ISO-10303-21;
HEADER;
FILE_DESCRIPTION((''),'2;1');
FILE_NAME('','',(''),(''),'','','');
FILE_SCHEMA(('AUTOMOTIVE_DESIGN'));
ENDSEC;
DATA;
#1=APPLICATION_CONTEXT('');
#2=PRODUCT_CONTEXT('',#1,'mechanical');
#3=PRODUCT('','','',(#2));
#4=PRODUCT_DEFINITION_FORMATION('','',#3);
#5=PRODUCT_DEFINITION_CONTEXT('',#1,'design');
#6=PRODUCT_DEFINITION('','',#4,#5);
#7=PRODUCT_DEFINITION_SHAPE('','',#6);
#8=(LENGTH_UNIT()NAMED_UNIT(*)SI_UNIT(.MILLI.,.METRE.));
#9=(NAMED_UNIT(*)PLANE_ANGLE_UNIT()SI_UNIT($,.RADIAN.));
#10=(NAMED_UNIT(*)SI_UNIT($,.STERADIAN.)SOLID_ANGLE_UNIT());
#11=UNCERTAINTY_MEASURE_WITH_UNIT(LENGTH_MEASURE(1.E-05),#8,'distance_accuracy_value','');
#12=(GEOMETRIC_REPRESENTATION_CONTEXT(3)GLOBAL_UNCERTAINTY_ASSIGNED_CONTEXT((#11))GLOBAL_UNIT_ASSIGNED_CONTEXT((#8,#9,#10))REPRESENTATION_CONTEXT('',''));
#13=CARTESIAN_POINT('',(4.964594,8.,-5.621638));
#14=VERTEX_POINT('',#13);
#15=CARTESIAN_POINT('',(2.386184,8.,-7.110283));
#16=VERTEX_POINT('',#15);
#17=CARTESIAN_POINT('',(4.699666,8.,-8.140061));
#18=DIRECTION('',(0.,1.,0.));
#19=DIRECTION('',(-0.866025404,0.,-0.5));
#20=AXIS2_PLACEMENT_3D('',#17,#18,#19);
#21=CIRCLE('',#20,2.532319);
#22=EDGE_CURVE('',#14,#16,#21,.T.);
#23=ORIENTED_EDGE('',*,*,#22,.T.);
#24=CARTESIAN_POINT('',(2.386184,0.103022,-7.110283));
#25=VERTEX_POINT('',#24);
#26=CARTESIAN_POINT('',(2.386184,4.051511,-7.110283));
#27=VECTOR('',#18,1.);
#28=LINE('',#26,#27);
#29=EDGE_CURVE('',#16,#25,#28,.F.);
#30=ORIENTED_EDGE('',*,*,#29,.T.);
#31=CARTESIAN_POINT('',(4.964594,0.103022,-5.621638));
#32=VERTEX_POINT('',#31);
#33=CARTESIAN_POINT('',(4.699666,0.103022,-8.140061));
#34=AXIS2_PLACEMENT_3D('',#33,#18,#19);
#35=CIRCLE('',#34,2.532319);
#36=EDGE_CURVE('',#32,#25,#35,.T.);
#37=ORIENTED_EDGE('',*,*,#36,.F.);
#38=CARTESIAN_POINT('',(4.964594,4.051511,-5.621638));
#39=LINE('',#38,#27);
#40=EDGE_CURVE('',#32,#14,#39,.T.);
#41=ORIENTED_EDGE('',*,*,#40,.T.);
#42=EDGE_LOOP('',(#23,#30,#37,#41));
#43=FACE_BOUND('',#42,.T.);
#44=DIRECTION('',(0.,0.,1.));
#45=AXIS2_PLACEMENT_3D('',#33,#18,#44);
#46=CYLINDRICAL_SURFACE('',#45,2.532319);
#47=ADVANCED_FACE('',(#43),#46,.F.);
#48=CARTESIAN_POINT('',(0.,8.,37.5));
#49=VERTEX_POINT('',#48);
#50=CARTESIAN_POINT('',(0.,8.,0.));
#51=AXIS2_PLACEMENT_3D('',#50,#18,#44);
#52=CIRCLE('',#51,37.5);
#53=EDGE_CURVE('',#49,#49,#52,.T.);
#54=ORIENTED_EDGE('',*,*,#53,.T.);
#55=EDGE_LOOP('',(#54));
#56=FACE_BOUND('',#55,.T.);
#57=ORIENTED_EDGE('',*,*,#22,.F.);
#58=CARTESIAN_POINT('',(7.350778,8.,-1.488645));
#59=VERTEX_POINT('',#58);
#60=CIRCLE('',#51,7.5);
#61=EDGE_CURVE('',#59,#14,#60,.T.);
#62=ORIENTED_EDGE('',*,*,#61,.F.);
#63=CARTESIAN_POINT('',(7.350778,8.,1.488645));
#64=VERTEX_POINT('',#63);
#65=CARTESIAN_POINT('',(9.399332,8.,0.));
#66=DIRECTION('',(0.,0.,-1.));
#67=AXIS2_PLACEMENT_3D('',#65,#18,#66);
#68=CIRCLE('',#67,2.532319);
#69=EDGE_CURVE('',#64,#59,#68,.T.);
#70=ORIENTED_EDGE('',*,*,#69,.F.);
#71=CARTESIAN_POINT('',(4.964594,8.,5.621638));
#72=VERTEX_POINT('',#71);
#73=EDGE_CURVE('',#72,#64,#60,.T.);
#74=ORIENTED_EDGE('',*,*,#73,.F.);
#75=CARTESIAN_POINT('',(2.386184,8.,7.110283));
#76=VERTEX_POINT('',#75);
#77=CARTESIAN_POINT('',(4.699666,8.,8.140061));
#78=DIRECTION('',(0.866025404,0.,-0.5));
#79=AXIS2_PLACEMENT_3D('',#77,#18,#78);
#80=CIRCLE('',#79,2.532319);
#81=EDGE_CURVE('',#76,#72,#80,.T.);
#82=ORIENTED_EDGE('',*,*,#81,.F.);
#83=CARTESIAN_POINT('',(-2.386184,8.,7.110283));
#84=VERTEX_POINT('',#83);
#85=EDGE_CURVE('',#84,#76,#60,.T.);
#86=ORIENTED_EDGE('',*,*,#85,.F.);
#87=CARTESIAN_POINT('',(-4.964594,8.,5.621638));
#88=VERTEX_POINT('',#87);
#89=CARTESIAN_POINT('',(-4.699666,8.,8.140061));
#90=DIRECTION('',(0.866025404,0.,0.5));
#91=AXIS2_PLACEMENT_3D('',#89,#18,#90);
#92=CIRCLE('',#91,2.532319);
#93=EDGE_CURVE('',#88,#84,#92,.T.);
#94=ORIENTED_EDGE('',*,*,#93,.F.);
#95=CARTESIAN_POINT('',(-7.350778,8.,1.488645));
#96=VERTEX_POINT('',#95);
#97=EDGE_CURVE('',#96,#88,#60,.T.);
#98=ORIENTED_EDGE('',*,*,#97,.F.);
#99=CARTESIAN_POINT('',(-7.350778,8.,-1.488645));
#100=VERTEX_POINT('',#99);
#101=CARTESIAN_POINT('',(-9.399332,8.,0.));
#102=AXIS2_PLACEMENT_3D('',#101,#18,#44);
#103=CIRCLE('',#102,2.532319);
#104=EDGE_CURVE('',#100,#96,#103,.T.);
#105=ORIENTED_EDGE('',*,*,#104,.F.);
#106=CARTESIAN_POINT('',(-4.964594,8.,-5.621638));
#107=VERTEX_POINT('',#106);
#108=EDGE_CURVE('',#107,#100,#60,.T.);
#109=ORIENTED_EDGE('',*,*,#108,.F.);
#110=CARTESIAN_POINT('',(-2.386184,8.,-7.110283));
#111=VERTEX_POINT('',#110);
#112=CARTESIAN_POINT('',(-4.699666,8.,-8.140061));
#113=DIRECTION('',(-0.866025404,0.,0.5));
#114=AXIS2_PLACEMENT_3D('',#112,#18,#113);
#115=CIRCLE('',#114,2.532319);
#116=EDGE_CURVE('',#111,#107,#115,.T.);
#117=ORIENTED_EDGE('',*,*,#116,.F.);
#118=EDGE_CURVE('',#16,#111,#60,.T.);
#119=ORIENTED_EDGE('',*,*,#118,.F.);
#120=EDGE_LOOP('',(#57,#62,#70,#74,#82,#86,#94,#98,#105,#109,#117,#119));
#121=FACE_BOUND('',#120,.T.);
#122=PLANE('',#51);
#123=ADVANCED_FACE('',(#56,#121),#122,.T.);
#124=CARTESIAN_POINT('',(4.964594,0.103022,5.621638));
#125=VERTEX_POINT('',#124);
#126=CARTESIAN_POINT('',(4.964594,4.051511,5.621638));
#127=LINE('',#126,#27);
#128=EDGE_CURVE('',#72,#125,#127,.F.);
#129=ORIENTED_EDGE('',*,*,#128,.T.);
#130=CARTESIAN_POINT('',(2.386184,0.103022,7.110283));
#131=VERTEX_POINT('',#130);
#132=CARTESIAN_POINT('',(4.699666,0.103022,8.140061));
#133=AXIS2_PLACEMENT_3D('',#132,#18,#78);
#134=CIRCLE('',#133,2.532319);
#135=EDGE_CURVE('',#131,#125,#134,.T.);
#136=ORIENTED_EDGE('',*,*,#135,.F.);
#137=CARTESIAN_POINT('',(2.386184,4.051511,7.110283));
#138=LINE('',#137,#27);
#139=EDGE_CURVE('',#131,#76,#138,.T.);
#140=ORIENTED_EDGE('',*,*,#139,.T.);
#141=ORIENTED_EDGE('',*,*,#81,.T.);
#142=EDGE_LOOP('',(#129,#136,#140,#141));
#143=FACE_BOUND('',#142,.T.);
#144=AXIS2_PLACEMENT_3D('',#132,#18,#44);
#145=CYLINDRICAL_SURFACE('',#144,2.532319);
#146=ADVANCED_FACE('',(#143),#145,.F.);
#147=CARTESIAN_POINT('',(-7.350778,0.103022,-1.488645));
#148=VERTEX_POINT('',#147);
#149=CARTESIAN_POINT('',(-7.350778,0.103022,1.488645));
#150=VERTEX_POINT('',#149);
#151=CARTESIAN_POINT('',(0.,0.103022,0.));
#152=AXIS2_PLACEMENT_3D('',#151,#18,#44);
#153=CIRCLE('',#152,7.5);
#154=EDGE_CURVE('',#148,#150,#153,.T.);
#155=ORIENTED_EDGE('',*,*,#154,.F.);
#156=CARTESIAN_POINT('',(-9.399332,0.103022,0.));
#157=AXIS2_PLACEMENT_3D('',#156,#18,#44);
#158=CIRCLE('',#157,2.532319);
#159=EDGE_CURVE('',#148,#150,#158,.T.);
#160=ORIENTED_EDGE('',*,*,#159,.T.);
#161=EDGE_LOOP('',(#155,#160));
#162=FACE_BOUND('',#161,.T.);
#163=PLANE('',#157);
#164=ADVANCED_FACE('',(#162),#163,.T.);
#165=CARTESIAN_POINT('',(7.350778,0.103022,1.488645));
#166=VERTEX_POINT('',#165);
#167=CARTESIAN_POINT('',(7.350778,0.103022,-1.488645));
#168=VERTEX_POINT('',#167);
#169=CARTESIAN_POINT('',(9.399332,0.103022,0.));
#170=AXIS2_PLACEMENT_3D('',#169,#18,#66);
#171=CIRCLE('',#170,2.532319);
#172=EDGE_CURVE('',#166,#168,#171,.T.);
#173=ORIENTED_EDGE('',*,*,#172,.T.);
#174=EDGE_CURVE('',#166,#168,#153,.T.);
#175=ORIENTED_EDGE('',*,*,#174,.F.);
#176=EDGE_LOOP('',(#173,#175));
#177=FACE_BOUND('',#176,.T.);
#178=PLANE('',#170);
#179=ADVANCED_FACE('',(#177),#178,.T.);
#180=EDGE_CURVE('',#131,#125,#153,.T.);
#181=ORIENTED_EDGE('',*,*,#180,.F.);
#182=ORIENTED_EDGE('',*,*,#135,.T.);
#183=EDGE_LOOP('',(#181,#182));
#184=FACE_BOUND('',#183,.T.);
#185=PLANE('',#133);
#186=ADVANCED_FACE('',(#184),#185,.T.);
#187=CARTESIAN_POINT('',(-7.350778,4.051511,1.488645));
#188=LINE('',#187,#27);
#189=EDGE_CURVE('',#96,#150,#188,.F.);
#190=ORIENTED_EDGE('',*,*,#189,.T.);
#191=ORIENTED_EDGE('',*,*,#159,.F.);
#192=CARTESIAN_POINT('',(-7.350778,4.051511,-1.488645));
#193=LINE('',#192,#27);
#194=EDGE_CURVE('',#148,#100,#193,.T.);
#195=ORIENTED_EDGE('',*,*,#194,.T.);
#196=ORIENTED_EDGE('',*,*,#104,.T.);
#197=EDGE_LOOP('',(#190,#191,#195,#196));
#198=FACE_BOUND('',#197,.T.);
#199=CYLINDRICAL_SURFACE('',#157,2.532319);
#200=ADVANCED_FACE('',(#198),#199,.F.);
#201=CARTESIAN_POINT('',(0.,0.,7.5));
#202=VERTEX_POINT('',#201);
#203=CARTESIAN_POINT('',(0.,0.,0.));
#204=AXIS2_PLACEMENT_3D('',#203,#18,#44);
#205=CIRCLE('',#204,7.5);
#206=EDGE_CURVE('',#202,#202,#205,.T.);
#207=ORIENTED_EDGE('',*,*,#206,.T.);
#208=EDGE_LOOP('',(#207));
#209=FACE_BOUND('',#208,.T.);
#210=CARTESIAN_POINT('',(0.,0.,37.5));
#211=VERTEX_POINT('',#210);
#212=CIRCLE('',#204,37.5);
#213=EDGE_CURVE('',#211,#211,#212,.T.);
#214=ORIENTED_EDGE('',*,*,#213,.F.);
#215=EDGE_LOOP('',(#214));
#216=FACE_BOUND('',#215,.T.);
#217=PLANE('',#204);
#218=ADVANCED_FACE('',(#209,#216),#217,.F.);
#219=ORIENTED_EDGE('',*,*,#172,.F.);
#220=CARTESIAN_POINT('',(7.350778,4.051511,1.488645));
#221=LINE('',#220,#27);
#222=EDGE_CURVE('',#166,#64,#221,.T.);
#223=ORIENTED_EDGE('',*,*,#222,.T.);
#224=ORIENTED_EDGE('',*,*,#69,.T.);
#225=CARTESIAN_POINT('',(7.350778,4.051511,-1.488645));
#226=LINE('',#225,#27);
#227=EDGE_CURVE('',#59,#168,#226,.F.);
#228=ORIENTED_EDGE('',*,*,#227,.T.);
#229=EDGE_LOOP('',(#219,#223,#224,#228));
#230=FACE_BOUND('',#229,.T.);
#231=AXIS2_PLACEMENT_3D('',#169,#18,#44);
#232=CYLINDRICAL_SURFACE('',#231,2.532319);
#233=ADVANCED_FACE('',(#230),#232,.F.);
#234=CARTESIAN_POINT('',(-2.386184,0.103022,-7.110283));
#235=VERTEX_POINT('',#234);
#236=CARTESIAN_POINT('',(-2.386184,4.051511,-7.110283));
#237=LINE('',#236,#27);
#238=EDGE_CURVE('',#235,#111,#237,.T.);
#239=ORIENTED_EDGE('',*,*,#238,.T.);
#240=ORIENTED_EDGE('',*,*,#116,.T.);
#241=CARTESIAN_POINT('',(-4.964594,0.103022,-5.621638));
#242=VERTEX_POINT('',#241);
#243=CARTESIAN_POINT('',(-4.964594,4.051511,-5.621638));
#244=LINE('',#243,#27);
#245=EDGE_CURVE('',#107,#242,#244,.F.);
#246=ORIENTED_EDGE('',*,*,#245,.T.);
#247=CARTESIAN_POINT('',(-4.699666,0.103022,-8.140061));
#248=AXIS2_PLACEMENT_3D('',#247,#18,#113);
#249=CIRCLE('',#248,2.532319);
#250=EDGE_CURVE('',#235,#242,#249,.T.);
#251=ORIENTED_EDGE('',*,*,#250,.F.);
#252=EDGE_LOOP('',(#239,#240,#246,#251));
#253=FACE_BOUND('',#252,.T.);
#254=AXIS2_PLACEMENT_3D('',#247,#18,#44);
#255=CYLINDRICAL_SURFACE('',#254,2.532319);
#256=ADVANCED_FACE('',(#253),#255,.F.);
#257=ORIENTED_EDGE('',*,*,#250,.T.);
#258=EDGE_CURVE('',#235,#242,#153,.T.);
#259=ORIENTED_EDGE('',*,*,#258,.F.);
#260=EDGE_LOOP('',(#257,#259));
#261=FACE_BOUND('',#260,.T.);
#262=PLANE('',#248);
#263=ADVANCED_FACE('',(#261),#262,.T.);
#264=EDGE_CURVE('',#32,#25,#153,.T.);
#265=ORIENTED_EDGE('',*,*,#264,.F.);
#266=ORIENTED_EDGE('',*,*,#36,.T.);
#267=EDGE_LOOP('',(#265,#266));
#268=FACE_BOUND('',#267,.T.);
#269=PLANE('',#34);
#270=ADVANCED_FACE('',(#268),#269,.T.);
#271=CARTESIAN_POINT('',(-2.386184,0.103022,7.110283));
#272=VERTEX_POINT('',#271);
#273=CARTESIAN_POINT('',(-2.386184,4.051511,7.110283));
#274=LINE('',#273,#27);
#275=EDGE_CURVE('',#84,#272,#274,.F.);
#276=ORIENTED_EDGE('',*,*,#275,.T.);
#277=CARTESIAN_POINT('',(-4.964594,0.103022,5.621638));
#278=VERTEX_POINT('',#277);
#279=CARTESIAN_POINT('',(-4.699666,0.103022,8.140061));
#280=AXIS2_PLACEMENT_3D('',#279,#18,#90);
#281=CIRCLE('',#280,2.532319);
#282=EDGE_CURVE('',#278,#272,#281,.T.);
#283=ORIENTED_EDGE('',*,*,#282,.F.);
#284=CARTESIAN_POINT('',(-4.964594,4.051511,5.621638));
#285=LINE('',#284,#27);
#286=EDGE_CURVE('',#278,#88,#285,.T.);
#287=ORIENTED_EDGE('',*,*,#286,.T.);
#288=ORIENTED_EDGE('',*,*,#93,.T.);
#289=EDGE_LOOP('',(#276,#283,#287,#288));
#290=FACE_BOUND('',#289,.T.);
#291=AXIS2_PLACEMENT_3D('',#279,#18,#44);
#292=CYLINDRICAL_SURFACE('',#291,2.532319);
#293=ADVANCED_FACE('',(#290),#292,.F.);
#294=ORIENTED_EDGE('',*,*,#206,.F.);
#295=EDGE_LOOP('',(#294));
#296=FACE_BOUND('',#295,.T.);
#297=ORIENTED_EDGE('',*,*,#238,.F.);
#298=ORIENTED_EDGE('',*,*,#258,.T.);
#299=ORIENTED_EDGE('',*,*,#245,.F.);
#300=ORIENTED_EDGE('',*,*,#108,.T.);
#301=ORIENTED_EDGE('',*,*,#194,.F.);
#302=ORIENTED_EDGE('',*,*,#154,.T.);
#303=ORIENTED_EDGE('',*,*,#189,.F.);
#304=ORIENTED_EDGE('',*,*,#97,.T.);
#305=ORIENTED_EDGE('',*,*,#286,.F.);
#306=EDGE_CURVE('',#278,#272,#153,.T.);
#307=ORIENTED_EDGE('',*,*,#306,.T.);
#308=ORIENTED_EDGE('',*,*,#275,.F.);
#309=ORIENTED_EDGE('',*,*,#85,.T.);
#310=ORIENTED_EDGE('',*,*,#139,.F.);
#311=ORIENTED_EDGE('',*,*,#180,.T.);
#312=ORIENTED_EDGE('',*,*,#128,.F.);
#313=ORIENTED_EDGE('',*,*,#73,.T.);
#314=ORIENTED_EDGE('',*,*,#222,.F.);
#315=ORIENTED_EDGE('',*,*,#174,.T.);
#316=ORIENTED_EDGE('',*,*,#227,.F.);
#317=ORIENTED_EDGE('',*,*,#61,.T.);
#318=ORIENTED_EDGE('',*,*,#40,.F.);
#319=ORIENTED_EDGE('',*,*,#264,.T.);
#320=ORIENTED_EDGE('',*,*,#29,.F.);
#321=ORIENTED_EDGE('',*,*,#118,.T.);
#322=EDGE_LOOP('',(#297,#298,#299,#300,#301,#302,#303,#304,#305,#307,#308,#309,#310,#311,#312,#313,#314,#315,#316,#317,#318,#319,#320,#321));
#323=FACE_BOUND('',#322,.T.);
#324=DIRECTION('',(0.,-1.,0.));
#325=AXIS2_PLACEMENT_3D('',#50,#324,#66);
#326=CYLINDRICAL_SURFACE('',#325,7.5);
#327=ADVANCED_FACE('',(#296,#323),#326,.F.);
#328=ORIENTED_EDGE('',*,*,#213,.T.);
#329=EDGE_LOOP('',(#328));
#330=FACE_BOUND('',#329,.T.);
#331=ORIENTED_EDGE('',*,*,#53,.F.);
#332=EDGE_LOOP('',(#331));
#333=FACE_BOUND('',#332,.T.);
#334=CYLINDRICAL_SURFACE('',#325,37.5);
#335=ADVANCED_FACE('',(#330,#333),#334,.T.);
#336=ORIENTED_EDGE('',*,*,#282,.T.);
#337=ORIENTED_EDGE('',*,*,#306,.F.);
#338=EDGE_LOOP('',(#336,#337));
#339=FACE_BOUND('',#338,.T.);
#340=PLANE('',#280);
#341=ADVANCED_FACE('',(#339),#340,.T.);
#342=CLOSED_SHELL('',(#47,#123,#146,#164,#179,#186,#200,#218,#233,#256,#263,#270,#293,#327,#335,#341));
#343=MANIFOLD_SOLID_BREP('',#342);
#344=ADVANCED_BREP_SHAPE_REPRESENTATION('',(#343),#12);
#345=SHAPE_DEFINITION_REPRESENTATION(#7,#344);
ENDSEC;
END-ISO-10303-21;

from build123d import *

# Parameters (mm, degrees)
SKETCH1_R           = 37.5
BOSS_EXTRUDE1_DEPTH = 8
SKETCH2_R           = 7.5
CUT_EXTRUDE1_DEPTH  = 54.633012222
SKETCH3_R           = 2.532319178
CUT_EXTRUDE2_DEPTH  = 7.896978043
CIRPATTERN1_COUNT   = 6


with BuildPart() as part:
    # Sketch1 → Boss-Extrude1 (new body)
    with BuildSketch(Plane(origin=(0, 0, 0), x_dir=(1, 0, 0), z_dir=(0, 1, 0))):
        Circle(SKETCH1_R)
    extrude(amount=BOSS_EXTRUDE1_DEPTH)

    # Sketch2 → Cut-Extrude1 (cut, through all)
    with BuildSketch(Plane(origin=(0, 0, 0), x_dir=(1, 0, 0), z_dir=(0, 1, 0))):
        Circle(SKETCH2_R)
    extrude(amount=CUT_EXTRUDE1_DEPTH, mode=Mode.SUBTRACT)

    # Sketch3 → Cut-Extrude2 (cut)
    with BuildSketch(Plane(origin=(0, 8, 0), x_dir=(1, 0, 0), z_dir=(0, 1, 0))):
        with Locations((-9.3993324, 0)):
            Circle(SKETCH3_R)
    cut_extrude2 = extrude(amount=-CUT_EXTRUDE2_DEPTH, mode=Mode.SUBTRACT)

    # CirPattern1: Cut-Extrude2 ×6 about axis
    cirpattern1_axis = Axis((0, 0, 0), (0, 1, 0))
    for i in range(1, CIRPATTERN1_COUNT):
        add(cut_extrude2.rotate(cirpattern1_axis, i * 360 / CIRPATTERN1_COUNT), mode=Mode.SUBTRACT)


solid = part.part
